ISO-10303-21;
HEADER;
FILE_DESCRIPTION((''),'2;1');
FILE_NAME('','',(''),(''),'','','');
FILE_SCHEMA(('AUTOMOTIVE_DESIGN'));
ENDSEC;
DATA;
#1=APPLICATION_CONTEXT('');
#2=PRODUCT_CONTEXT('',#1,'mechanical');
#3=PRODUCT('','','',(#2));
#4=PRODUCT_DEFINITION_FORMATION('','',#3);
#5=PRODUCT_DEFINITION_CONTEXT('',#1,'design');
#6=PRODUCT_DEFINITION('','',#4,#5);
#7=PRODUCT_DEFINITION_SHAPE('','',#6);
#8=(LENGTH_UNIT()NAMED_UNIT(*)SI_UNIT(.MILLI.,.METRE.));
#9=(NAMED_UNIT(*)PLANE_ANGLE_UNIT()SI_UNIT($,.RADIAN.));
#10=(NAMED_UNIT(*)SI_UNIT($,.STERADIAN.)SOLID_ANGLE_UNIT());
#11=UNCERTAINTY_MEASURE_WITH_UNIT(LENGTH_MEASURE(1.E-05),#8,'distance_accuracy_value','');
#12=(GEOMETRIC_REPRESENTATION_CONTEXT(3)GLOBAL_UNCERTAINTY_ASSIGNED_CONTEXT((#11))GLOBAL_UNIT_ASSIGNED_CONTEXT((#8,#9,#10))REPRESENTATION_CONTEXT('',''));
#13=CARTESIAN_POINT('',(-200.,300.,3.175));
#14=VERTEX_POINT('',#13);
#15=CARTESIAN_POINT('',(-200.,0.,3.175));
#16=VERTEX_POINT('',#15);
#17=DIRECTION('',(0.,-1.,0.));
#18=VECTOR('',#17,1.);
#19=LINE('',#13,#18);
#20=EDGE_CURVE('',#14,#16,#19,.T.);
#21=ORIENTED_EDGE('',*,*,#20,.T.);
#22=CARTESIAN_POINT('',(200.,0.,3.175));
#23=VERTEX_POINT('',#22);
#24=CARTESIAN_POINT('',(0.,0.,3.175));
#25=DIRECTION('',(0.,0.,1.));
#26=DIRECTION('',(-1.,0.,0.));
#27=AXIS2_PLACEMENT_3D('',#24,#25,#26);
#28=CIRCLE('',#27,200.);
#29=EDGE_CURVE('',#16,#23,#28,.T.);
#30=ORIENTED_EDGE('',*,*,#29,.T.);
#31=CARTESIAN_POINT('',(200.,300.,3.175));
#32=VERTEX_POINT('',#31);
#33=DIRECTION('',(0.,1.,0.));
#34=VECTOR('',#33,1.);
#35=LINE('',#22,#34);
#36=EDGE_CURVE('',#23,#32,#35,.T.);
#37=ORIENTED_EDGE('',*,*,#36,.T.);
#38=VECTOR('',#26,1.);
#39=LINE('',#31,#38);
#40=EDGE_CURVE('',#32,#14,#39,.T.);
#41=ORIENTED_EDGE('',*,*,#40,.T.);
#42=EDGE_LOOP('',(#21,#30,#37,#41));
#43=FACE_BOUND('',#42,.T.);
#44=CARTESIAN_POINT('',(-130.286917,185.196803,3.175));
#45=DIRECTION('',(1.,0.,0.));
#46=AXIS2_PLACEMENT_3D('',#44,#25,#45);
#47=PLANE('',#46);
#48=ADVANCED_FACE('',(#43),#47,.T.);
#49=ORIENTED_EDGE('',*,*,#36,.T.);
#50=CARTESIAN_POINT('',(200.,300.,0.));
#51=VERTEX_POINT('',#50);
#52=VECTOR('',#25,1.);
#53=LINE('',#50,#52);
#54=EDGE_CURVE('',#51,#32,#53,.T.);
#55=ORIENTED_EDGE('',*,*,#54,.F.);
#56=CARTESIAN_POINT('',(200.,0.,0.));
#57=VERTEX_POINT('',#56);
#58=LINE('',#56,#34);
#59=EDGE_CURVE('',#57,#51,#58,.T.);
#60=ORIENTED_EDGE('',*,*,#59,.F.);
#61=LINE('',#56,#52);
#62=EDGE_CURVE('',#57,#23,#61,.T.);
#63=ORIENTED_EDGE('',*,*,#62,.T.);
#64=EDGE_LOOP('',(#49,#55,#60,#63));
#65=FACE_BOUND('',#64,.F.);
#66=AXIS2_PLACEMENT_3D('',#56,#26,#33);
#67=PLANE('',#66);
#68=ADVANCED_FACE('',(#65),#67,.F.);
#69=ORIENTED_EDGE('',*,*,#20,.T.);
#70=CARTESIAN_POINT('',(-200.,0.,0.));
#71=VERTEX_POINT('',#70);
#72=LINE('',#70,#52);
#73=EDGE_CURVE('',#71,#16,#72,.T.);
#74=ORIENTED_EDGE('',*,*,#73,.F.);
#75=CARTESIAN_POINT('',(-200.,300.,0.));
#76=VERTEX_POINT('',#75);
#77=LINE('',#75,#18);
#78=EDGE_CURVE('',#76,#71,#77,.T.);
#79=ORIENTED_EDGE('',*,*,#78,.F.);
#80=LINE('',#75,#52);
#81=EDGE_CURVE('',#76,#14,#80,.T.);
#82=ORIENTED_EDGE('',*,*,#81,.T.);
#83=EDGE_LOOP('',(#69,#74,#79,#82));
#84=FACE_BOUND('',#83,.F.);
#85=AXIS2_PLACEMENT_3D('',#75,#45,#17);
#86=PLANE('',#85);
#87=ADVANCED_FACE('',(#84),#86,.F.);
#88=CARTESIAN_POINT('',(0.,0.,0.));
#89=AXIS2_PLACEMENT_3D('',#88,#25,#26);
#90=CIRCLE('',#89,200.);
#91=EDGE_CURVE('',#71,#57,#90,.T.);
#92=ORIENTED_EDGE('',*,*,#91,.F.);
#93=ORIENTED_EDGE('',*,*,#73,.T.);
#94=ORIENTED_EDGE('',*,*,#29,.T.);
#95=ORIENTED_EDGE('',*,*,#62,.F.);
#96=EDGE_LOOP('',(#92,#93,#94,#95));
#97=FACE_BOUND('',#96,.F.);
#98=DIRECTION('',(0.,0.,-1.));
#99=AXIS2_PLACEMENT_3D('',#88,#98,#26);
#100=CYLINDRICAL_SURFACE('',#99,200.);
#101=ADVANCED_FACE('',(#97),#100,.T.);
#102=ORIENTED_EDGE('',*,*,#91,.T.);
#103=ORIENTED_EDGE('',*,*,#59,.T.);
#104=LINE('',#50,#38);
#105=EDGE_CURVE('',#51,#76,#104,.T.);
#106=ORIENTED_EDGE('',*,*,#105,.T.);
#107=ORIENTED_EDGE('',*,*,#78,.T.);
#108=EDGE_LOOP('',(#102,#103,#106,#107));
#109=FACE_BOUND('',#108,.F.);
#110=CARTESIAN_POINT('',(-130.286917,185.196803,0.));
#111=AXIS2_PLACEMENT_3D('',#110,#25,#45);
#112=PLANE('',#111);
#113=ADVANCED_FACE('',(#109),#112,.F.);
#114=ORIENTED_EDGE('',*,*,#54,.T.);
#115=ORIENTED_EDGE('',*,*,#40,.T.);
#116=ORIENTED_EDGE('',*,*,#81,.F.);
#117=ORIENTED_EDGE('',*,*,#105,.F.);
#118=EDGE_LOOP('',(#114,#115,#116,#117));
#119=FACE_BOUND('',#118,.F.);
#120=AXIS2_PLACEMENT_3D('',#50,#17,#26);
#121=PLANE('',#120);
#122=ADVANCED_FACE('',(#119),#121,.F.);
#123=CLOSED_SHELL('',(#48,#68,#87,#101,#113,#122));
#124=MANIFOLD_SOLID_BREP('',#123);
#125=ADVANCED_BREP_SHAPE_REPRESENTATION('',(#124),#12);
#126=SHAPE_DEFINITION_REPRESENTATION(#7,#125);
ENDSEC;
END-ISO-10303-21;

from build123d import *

# Parameters (mm, degrees)
F1_DEPTH = 3.175


with BuildPart() as f1:
    # F0 (on Top) → F1 (new body)
    with BuildSketch(Plane.XY):
        with BuildLine():
            ThreePointArc((-200, 0), (-141.4213562373, 141.4213562373), (0, 200))
            Line((0, 200), (0, 300))
            Line((0, 300), (-200, 300))
            Line((-200, 300), (-200, 0))
        make_face()
        with BuildLine():
            Line((0, 300), (0, 200))
            ThreePointArc((0, 200), (141.4213562373, 141.4213562373), (200, 0))
            Line((200, 0), (200, 300))
            Line((200, 300), (0, 300))
        make_face()
        with BuildLine():
            Line((-200, 0), (0, 0))
            Line((0, 0), (0, 200))
            ThreePointArc((0, 200), (-141.4213562373, 141.4213562373), (-200, 0))
        make_face()
        with BuildLine():
            Line((0, 200), (0, 0))
            Line((0, 0), (-200, 0))
            ThreePointArc((-200, 0), (0, -200), (200, 0))
            ThreePointArc((200, 0), (141.4213562373, 141.4213562373), (0, 200))
        make_face()
    extrude(amount=F1_DEPTH)


solid = f1.part
